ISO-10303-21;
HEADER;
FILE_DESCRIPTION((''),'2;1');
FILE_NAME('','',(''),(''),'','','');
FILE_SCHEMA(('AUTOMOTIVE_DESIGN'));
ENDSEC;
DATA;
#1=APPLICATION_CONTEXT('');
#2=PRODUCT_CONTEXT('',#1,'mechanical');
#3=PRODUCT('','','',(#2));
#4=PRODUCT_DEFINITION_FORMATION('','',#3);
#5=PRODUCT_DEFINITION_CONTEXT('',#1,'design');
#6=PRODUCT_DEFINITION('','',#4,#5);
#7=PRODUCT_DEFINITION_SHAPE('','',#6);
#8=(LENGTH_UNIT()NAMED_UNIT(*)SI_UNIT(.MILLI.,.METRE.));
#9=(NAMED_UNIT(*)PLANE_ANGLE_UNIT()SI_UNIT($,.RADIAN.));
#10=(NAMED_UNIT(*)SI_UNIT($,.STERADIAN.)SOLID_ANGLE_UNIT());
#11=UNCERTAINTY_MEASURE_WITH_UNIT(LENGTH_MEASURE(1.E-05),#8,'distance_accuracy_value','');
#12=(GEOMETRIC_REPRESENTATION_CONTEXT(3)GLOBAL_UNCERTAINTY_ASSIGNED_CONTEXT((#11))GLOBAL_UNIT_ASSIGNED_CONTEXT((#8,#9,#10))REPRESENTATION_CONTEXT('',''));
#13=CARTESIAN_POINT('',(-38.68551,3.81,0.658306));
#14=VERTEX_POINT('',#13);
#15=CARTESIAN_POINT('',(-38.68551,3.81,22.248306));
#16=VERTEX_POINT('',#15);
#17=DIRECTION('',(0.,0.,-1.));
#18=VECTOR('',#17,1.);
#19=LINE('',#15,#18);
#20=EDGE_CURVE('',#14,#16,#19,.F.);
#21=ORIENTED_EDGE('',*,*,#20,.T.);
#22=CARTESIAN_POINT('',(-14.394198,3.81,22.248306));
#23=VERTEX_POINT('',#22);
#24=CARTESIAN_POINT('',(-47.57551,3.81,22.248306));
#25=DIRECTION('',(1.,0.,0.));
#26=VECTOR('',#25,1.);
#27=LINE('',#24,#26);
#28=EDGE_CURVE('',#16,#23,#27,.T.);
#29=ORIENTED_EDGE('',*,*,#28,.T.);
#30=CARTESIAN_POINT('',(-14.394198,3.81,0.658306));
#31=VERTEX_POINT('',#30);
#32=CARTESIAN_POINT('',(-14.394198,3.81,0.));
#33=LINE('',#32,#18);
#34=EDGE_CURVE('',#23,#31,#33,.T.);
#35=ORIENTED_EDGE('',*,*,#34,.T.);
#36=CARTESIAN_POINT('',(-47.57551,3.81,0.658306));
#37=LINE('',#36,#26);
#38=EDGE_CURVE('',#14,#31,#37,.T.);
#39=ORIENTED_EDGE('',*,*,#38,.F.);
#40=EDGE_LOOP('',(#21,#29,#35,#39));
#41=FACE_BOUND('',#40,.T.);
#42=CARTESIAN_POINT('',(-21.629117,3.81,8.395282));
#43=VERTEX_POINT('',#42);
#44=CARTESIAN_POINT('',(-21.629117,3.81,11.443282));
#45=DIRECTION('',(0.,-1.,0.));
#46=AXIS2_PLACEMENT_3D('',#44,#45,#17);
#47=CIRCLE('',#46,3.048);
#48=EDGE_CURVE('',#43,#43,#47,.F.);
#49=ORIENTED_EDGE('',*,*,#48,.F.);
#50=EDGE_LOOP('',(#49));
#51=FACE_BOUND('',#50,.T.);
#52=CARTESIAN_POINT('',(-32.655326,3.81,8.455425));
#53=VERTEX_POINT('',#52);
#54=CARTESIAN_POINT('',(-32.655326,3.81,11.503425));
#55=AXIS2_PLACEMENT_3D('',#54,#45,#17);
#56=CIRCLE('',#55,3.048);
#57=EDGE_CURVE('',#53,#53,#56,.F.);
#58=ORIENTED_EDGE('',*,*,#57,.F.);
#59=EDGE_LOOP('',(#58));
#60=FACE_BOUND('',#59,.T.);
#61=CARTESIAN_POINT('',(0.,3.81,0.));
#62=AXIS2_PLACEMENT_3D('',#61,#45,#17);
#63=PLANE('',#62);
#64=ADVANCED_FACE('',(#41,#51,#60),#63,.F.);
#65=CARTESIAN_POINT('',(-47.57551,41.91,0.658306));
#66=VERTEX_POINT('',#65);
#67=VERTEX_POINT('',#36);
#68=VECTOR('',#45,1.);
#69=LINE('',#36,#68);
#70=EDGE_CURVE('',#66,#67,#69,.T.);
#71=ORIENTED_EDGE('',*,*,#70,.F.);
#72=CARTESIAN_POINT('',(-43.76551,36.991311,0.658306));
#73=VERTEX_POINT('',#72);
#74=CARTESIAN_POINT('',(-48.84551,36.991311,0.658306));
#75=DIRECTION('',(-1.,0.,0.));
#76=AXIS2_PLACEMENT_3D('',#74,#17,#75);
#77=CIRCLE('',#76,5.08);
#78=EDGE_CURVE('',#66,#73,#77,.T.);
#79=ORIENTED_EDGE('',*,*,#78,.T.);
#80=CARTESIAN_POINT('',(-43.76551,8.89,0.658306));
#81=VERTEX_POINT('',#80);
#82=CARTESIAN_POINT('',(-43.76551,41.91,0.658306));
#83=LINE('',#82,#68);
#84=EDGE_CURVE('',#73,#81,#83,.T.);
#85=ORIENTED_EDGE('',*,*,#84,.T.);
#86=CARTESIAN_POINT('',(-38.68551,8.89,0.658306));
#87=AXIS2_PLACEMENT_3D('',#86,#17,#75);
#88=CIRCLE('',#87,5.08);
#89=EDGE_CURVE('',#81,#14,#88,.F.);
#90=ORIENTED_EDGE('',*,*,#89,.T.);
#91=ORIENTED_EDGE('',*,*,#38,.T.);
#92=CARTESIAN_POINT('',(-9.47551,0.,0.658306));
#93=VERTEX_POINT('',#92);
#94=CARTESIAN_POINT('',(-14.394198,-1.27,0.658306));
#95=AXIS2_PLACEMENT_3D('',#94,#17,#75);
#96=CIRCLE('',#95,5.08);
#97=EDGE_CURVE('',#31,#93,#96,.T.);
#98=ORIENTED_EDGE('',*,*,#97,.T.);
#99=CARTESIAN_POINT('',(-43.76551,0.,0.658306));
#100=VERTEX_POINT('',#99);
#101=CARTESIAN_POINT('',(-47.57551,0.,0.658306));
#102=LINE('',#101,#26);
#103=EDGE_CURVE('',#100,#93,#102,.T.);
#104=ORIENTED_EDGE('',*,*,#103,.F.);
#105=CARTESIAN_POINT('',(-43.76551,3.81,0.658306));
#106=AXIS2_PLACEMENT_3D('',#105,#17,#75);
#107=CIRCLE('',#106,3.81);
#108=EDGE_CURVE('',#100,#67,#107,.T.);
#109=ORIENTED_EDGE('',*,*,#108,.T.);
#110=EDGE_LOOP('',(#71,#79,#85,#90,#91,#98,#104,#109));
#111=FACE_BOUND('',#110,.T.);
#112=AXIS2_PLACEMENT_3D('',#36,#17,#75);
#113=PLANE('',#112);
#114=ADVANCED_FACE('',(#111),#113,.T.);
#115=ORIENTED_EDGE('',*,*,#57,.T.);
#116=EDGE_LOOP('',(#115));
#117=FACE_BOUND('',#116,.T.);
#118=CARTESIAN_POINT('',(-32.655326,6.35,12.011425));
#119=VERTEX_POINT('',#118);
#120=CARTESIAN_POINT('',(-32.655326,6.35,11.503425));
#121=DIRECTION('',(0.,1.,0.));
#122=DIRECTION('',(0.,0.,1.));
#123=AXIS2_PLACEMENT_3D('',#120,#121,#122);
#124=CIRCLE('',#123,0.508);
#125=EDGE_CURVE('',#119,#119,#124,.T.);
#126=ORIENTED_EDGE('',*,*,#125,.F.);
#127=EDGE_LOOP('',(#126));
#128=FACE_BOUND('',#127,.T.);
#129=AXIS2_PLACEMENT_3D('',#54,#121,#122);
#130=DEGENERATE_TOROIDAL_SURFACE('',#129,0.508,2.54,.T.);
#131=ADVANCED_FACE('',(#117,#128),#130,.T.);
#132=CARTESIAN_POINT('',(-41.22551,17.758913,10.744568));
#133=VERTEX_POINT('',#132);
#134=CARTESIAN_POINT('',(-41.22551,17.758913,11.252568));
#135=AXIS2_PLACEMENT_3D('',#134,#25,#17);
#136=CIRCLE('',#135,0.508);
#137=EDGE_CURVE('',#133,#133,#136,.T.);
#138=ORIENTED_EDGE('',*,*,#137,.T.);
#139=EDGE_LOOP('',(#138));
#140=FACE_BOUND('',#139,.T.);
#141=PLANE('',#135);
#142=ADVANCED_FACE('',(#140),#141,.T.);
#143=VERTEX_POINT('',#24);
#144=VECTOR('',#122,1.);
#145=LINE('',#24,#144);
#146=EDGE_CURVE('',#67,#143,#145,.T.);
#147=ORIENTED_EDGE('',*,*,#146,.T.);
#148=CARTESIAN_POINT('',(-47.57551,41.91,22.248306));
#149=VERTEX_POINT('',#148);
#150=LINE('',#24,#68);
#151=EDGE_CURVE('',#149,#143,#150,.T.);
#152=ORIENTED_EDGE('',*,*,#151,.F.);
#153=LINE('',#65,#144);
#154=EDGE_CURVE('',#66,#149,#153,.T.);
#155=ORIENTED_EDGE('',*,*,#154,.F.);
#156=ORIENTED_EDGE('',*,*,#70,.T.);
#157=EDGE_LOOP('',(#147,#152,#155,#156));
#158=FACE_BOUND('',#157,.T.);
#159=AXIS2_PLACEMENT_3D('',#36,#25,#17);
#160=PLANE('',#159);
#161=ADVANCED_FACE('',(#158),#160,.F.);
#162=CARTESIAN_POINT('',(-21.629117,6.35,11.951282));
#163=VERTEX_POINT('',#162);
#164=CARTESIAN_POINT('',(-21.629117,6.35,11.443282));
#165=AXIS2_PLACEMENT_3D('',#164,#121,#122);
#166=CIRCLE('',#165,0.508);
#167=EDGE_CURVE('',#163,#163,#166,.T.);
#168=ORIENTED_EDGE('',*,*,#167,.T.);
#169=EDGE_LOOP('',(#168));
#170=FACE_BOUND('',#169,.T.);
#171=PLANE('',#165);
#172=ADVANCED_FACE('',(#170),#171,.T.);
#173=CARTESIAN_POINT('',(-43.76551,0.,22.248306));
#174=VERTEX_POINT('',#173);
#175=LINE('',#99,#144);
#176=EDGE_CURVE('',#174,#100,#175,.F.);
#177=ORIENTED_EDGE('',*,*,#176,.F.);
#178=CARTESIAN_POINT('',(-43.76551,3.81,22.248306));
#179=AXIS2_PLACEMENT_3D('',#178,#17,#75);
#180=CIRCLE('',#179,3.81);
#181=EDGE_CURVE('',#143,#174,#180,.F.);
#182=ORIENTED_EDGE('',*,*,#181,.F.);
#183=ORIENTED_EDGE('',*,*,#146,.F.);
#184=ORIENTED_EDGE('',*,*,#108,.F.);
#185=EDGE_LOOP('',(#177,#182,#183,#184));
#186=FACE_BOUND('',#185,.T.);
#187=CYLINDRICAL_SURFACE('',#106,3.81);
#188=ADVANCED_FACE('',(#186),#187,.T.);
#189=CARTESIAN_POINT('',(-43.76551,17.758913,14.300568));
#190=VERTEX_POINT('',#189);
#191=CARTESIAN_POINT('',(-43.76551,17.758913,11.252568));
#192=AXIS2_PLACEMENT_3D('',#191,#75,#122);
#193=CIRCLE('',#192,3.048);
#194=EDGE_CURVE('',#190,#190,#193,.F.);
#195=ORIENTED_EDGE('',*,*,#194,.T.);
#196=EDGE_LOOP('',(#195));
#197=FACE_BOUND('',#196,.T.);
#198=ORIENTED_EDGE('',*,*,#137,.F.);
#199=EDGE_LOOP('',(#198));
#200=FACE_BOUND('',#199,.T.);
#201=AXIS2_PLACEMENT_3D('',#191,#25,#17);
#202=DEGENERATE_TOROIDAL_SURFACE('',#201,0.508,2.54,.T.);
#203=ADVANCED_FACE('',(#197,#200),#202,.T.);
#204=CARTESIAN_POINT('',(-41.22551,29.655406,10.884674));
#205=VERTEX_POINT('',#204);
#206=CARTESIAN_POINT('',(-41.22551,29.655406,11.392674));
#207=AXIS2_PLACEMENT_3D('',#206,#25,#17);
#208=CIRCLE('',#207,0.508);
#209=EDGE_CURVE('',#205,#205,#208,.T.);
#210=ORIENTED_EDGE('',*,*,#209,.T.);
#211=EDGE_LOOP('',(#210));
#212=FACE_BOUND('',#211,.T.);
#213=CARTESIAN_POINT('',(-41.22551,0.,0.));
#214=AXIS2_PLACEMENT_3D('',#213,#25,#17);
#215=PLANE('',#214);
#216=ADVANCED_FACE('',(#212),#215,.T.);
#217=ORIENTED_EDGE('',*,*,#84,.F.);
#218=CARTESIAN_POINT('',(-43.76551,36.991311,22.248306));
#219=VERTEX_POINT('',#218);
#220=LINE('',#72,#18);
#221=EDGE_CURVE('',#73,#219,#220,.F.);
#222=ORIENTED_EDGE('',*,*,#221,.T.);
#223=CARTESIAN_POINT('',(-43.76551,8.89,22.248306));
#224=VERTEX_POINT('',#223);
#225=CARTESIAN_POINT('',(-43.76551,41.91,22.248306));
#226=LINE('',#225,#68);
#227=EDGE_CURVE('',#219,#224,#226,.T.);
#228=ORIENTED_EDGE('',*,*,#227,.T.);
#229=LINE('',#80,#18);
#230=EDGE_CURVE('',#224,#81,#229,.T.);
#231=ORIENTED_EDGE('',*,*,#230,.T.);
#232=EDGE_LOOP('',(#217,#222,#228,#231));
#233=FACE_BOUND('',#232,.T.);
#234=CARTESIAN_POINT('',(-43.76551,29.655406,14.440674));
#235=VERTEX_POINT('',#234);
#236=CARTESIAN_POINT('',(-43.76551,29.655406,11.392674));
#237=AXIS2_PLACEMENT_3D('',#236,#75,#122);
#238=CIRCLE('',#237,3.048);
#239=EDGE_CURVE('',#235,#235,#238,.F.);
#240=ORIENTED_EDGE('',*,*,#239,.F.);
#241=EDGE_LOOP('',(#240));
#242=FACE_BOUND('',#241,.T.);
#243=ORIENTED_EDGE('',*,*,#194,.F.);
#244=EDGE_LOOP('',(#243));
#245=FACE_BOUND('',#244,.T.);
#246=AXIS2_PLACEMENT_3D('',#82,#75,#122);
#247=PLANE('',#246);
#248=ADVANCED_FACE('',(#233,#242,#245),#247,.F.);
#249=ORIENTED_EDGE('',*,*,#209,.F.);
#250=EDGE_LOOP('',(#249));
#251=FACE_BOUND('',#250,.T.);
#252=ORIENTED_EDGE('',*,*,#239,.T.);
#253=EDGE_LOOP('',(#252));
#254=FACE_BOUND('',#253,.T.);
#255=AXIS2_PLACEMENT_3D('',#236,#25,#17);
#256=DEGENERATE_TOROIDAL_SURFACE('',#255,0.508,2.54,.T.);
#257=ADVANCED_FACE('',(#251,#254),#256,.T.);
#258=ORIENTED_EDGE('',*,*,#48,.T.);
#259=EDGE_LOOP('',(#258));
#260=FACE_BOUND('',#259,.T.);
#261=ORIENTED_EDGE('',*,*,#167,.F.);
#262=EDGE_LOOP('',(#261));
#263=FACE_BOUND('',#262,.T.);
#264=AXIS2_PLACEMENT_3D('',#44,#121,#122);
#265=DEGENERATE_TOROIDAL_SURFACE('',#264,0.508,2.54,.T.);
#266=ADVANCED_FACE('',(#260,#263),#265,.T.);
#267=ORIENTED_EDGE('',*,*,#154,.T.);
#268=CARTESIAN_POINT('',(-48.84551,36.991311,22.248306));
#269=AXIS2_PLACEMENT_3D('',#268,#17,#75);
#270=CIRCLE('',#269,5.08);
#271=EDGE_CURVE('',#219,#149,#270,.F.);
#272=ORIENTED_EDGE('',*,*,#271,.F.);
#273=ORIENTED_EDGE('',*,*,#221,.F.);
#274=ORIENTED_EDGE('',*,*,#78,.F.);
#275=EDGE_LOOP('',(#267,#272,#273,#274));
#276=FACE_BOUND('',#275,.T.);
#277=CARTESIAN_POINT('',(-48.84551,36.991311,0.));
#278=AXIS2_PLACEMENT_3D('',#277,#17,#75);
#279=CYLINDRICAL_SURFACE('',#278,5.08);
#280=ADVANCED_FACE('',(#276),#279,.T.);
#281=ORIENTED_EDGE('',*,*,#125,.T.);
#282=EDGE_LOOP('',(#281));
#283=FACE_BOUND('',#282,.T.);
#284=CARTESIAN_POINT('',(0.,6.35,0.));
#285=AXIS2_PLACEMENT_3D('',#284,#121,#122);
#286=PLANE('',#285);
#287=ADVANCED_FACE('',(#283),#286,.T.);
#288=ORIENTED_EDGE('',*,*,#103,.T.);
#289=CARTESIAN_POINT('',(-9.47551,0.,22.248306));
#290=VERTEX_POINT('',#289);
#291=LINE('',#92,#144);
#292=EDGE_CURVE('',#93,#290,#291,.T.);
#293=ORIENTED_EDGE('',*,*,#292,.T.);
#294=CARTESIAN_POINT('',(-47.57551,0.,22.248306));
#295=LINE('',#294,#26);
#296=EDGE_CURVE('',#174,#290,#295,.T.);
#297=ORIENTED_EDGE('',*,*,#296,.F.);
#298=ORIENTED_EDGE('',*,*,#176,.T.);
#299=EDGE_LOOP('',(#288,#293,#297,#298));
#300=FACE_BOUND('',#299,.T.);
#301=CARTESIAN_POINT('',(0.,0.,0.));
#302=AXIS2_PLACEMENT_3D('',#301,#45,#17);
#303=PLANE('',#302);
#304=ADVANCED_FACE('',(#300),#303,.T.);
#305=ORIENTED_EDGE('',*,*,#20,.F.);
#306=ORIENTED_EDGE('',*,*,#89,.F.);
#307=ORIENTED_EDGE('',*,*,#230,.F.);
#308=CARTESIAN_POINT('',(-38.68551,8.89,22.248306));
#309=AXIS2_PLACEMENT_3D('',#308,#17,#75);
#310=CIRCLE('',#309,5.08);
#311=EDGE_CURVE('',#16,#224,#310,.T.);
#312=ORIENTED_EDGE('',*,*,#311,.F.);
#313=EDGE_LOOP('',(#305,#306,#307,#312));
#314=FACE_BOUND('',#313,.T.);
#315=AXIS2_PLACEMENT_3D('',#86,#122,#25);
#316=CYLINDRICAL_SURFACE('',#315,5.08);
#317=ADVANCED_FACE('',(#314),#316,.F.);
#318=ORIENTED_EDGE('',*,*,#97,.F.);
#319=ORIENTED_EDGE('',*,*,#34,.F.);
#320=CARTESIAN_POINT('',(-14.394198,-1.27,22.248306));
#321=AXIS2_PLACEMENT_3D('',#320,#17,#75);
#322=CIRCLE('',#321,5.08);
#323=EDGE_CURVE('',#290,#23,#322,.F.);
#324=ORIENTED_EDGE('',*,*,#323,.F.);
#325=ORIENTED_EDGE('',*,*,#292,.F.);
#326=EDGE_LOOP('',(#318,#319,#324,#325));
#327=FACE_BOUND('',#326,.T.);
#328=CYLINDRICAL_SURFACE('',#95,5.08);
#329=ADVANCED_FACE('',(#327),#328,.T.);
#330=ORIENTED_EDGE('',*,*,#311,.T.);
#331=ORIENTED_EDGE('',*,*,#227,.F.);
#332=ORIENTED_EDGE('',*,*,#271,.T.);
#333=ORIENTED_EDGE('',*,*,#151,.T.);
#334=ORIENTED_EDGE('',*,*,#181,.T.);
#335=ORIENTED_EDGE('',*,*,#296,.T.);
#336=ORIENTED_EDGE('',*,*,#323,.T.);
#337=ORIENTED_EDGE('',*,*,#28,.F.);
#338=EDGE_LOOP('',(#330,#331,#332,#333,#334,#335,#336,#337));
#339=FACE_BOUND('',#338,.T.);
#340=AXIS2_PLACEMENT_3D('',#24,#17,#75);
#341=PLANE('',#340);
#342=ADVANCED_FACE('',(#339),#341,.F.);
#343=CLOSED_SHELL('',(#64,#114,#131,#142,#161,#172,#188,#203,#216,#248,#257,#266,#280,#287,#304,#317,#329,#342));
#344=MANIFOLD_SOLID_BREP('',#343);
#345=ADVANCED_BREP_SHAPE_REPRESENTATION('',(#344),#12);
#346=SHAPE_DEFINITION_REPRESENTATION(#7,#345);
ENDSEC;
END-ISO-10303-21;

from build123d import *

# Parameters (mm, degrees)
SKETCH1_W           = 38.1
SKETCH1_H           = 21.59
BOSS_EXTRUDE1_DEPTH = 3.81
SKETCH2_W           = 3.81
SKETCH2_H           = 21.59
BOSS_EXTRUDE2_DEPTH = 38.1
FILLET1_R           = 5.08
FILLET2_R           = 3.81
SKETCH4_R           = 3.048
BOSS_EXTRUDE3_DEPTH = 2.54
SKETCH5_R           = 3.048
BOSS_EXTRUDE4_DEPTH = 2.54
FILLET3_R           = 2.54


# Some blends are built 0.0001 mm under size
with BuildPart() as part:
    # Sketch1 → Boss-Extrude1 (new body)
    with BuildSketch(Plane(origin=(0, 0, 0), x_dir=(1, 0, 0), z_dir=(0, 1, 0))):
        with Locations((-28.525509612, -11.453306042)):
            Rectangle(SKETCH1_W, SKETCH1_H)
    extrude(amount=BOSS_EXTRUDE1_DEPTH)

    # Sketch2 → Boss-Extrude2 (add)
    with BuildSketch(Plane(origin=(0, 3.81, 0), x_dir=(1, 0, 0), z_dir=(0, 1, 0))):
        with Locations((-45.670509612, -11.453306042)):
            Rectangle(SKETCH2_W, SKETCH2_H)
    extrude(amount=BOSS_EXTRUDE2_DEPTH)

    # Fillet1
    # the kernel refuses this fillet: 5.08 mm, written as the material it adds along each edge
    with BuildSketch(Plane(origin=(-43.765509612, 3.81, 0.658306042), x_dir=(1, 0, 0), z_dir=(0, 0, 1))) as fillet1_piece_1:
        with BuildLine():
            CenterArc((FILLET1_R, FILLET1_R), FILLET1_R, 180, 90)
            Line((0, FILLET1_R), (0, 0))
            Line((0, 0), (FILLET1_R, 0))
        make_face()
    extrude(amount=21.59)
    # the kernel refuses this fillet: 5.08 mm, written as the material it takes off along each edge
    with BuildSketch(Plane(origin=(-9.475509612, 3.81, -11.638416082), x_dir=(-1, 0, 0), z_dir=(0, 0, 1))) as fillet1_2_piece_1:
        with BuildLine():
            CenterArc((4.91868885, 5.08), FILLET1_R, 194.477512186, 75.522487814)
            Line((0, 3.81), (0, 0))
            Line((0, 0), (4.91868885, 0))
        make_face()
    extrude(amount=46.183444248, mode=Mode.SUBTRACT)
    with BuildSketch(Plane(origin=(-43.765509612, 41.91, -11.638416082), x_dir=(-1, 0, 0), z_dir=(0, 0, 1))) as fillet1_2_piece_2:
        with BuildLine():
            CenterArc((5.08, 4.91868885), FILLET1_R, 180, 75.522487814)
            Line((0, 4.91868885), (0, 0))
            Line((0, 0), (3.81, 0))
        make_face()
    extrude(amount=46.183444248, mode=Mode.SUBTRACT)

    # Fillet2
    fillet2_edges = [part.edges().sort_by_distance(p)[0] for p in [
        (-47.575509612, 0, 11.453306042),
    ]]
    fillet(fillet2_edges, radius=FILLET2_R)

    # Sketch4 → Boss-Extrude3 (add)
    with BuildSketch(Plane(origin=(-43.765509612, 0, 0), x_dir=(0, 0, -1), z_dir=(1, 0, 0))):
        with Locations(Location((-11.392673718, 29.655405516, 0), (0, 0, 180))):
            Circle(SKETCH4_R)
        with Locations(Location((-11.252567749, 17.758913463, 0), (0, 0, 180))):
            Circle(SKETCH4_R)
    extrude(amount=BOSS_EXTRUDE3_DEPTH)

    # Sketch5 → Boss-Extrude4 (add)
    with BuildSketch(Plane(origin=(0, 3.81, 0), x_dir=(1, 0, 0), z_dir=(0, 1, 0))):
        with Locations(Location((-32.655326175, -11.503425175, 0), (0, 0, 90))):
            Circle(SKETCH5_R)
        with Locations(Location((-21.629116904, -11.443282215, 0), (0, 0, 90))):
            Circle(SKETCH5_R)
    extrude(amount=BOSS_EXTRUDE4_DEPTH)

    # Fillet3
    fillet3_edges = [part.edges().sort_by_distance(p)[0] for p in [
        (-41.225509612, 29.655405516, 8.344673718),
        (-41.225509612, 17.758913463, 8.204567749),
        (-32.655326175, 6.35, 14.551425175),
        (-21.629116904, 6.35, 14.491282215),
    ]]
    fillet(fillet3_edges, radius=FILLET3_R - 0.0001)  # a hair under: the kernel refuses the full size


solid = part.part
